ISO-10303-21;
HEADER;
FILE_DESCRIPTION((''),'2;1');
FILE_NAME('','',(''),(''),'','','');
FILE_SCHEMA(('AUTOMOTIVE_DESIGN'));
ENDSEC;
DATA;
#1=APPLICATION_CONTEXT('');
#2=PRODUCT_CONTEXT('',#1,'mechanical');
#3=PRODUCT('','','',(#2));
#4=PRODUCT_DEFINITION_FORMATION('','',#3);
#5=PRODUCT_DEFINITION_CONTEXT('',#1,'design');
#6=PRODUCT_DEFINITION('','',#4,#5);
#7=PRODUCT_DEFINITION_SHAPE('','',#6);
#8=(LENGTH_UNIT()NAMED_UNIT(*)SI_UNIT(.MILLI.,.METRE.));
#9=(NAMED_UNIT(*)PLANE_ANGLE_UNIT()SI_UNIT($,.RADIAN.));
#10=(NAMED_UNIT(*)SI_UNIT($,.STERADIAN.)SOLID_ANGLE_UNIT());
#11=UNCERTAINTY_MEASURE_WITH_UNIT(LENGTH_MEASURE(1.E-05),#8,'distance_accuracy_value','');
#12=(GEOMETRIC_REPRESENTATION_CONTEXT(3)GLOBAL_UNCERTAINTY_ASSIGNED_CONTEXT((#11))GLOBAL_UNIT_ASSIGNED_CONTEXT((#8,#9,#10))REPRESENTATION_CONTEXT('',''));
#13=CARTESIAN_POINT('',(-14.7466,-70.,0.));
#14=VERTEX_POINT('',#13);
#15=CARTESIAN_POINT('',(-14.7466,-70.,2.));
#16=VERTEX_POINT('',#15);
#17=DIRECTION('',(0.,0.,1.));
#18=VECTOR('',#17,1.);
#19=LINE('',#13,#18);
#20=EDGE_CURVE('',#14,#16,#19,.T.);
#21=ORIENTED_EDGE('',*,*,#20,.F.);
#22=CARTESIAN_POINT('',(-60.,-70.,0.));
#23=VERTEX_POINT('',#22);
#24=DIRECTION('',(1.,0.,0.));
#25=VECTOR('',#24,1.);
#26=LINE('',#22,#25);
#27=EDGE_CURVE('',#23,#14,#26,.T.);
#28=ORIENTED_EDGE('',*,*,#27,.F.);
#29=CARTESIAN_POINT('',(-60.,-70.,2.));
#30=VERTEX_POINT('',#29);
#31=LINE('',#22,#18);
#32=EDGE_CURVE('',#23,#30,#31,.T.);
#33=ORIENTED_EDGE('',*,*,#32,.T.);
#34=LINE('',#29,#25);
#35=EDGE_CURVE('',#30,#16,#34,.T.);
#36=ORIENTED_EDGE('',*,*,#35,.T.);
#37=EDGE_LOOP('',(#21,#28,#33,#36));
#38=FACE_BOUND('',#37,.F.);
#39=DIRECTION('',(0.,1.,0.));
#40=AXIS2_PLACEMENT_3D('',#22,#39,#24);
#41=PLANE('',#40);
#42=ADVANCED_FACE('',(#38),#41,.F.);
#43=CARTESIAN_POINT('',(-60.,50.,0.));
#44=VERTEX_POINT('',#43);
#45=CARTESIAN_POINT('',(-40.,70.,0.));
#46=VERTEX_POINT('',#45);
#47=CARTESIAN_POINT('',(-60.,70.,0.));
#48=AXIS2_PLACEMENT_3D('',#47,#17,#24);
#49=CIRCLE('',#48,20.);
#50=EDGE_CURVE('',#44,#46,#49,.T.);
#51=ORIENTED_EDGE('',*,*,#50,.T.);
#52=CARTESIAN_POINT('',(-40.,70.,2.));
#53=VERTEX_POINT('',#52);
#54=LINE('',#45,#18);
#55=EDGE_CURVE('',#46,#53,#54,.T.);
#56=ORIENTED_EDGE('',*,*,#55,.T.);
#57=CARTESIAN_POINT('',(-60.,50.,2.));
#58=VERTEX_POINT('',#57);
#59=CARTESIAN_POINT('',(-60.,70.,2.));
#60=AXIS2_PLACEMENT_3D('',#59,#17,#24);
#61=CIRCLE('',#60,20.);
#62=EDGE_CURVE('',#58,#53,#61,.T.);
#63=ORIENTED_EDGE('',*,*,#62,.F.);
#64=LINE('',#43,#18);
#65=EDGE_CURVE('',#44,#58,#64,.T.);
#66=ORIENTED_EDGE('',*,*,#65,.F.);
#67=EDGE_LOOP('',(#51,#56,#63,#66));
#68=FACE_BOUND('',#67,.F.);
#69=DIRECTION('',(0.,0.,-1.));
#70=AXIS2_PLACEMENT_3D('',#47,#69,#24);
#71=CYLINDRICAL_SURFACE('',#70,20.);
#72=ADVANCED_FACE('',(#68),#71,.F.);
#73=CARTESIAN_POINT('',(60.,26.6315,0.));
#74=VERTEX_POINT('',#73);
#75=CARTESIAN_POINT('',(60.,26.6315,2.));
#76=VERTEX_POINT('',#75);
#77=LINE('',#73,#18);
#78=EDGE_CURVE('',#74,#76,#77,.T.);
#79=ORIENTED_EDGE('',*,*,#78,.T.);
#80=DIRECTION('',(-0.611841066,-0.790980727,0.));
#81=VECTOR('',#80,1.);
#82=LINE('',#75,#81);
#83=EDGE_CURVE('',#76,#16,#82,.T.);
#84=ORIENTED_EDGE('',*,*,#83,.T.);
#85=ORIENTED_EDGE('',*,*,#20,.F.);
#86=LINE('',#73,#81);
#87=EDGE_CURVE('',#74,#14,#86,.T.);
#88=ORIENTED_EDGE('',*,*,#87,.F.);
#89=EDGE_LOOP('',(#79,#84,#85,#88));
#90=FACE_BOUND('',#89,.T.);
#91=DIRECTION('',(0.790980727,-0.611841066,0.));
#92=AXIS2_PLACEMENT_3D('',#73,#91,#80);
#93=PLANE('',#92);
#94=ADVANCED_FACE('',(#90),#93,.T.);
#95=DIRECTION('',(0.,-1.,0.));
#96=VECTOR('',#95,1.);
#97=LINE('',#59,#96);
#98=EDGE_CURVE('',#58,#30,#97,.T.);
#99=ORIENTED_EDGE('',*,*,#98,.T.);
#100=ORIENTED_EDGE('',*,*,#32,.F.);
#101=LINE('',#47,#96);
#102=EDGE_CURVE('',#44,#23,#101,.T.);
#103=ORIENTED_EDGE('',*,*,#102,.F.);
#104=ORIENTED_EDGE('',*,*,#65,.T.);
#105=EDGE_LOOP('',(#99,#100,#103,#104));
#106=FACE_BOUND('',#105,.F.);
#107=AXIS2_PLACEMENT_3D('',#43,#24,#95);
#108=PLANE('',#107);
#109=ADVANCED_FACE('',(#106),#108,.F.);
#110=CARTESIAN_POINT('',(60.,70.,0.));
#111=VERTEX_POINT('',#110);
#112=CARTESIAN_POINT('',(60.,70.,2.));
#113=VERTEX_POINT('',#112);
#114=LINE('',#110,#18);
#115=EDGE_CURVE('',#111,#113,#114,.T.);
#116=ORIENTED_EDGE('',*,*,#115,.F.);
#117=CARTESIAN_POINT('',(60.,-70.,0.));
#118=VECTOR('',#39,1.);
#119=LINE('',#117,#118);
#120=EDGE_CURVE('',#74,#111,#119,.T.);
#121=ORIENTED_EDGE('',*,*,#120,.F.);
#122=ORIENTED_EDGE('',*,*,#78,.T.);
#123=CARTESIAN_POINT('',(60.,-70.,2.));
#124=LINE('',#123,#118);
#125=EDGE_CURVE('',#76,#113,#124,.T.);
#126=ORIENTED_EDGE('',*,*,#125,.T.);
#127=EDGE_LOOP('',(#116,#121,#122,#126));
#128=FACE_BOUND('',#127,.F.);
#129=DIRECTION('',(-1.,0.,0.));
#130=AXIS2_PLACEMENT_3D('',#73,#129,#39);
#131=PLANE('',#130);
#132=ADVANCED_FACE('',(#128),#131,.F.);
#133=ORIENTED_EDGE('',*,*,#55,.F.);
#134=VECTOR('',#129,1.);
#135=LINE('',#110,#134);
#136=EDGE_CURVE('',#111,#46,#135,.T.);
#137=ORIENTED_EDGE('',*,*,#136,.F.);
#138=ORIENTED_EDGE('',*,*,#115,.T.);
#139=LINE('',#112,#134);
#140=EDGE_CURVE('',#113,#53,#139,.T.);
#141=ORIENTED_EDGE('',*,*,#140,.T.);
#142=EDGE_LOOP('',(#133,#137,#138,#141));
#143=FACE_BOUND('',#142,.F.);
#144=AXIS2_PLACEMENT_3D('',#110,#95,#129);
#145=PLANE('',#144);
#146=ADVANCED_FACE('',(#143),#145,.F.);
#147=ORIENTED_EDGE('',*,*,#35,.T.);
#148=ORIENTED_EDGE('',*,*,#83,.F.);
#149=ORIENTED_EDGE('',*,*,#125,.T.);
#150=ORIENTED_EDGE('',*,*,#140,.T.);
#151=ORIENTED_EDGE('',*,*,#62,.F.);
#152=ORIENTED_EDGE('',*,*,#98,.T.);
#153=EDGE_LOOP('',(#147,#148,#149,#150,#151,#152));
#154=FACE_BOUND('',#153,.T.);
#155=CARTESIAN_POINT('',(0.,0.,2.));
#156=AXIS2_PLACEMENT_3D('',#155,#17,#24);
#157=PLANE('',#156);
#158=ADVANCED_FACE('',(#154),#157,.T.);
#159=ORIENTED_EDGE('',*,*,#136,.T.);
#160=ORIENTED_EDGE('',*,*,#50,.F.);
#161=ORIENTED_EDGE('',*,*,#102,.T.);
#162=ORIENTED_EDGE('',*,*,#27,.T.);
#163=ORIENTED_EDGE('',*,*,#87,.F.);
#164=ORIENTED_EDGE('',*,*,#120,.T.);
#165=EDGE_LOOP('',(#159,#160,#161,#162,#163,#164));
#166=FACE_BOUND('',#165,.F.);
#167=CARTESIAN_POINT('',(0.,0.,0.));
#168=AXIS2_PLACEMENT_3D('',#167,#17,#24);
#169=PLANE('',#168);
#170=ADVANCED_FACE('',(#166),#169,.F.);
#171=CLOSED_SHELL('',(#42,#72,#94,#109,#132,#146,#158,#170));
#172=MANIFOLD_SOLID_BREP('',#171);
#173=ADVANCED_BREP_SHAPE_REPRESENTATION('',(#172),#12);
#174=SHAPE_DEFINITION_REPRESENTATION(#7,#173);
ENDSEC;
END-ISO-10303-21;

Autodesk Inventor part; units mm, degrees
ref_plane "YZ Plane" through (0, 0, 0) normal (1, 0, 0) x (0, 1, 0)
ref_plane "XZ Plane" through (0, 0, 0) normal (0, 1, 0) x (-1, 0, 0)
ref_plane "XY Plane" through (0, 0, 0) normal (0, 0, 1) x (1, 0, 0)
sketch "Sketch1" plane through (0, 0, 0) normal (0, 0, 1) x (1, 0, 0)
  line L0 (-60, -70) -> (60, -70)
  line L1 (60, -70) -> (60, 70)
  line L2 (60, 70) -> (-60, 70)
  line L3 (-60, 70) -> (-60, -70)
  line L4 (-60, -70) -> (60, 70) construction
  line L5 (60, -70) -> (-60, 70) construction
  line L6 (-60, 0) -> (60, 0) construction
  circle A0 centre (-60, 70) radius 20
  line L7 (60, 26.6315) -> (-14.7466, -70)
  point P0 (0, 0)
  point P1 (0, 0)
  point P2 (-40, 70)
  point P3 (-60, 50)
  dimension "d0" = 120
  dimension "d1" = 140
  dimension "d16" = 40
extrude "Plate1" add sketch "Sketch1" along normal blind 2 contours L3 A0 L2 L1 L7 L0
sketch "Sketch2" plane through (0, 0, 0) normal (0, 0, -1) x (-1, 0, 0)
  line L0 (-40, 50) -> (160, 50) construction
  line L1 (160, 50) -> (160, 30) construction
  line L2 (160, 30) -> (-40, 30) construction
  line L3 (-40, 30) -> (-40, 50) construction
  line L4 (-60, 70) -> (40, 70) projected
  line L5 (-60, 26.6315) -> (-60, 70) projected
  point P0 (0, 0)
  point P1 (-48, 100)
  point P2 (60, 70)
  point P3 (-60, -70)
  point P4 (-50, 98)
  dimension "d6" = 200
  dimension "d9" = 20
  dimension "d10" = 20
  dimension "d11" = 20
mark "Mark1"
equation "\"d2\" = Thickness"
equation "\"BendReliefWidth\" = Thickness"
equation "\"BendReliefDepth\" = 0.5 * Thickness"
equation "\"CornerReliefSize\" = 4 * Thickness"
equation "\"MinimumRemnant\" = 2 * Thickness"
equation "\"TransitionRadius\" = BendRadius"
equation "\"JacobiRadiusSize\" = BendRadius"
equation "\"GapSize\" = Thickness"
equation "\"Thickness\" = 2"
equation "\"BendRadius\" = 2.75"
properties part number "TRM 034 motor pillar" material "AISI 304"
